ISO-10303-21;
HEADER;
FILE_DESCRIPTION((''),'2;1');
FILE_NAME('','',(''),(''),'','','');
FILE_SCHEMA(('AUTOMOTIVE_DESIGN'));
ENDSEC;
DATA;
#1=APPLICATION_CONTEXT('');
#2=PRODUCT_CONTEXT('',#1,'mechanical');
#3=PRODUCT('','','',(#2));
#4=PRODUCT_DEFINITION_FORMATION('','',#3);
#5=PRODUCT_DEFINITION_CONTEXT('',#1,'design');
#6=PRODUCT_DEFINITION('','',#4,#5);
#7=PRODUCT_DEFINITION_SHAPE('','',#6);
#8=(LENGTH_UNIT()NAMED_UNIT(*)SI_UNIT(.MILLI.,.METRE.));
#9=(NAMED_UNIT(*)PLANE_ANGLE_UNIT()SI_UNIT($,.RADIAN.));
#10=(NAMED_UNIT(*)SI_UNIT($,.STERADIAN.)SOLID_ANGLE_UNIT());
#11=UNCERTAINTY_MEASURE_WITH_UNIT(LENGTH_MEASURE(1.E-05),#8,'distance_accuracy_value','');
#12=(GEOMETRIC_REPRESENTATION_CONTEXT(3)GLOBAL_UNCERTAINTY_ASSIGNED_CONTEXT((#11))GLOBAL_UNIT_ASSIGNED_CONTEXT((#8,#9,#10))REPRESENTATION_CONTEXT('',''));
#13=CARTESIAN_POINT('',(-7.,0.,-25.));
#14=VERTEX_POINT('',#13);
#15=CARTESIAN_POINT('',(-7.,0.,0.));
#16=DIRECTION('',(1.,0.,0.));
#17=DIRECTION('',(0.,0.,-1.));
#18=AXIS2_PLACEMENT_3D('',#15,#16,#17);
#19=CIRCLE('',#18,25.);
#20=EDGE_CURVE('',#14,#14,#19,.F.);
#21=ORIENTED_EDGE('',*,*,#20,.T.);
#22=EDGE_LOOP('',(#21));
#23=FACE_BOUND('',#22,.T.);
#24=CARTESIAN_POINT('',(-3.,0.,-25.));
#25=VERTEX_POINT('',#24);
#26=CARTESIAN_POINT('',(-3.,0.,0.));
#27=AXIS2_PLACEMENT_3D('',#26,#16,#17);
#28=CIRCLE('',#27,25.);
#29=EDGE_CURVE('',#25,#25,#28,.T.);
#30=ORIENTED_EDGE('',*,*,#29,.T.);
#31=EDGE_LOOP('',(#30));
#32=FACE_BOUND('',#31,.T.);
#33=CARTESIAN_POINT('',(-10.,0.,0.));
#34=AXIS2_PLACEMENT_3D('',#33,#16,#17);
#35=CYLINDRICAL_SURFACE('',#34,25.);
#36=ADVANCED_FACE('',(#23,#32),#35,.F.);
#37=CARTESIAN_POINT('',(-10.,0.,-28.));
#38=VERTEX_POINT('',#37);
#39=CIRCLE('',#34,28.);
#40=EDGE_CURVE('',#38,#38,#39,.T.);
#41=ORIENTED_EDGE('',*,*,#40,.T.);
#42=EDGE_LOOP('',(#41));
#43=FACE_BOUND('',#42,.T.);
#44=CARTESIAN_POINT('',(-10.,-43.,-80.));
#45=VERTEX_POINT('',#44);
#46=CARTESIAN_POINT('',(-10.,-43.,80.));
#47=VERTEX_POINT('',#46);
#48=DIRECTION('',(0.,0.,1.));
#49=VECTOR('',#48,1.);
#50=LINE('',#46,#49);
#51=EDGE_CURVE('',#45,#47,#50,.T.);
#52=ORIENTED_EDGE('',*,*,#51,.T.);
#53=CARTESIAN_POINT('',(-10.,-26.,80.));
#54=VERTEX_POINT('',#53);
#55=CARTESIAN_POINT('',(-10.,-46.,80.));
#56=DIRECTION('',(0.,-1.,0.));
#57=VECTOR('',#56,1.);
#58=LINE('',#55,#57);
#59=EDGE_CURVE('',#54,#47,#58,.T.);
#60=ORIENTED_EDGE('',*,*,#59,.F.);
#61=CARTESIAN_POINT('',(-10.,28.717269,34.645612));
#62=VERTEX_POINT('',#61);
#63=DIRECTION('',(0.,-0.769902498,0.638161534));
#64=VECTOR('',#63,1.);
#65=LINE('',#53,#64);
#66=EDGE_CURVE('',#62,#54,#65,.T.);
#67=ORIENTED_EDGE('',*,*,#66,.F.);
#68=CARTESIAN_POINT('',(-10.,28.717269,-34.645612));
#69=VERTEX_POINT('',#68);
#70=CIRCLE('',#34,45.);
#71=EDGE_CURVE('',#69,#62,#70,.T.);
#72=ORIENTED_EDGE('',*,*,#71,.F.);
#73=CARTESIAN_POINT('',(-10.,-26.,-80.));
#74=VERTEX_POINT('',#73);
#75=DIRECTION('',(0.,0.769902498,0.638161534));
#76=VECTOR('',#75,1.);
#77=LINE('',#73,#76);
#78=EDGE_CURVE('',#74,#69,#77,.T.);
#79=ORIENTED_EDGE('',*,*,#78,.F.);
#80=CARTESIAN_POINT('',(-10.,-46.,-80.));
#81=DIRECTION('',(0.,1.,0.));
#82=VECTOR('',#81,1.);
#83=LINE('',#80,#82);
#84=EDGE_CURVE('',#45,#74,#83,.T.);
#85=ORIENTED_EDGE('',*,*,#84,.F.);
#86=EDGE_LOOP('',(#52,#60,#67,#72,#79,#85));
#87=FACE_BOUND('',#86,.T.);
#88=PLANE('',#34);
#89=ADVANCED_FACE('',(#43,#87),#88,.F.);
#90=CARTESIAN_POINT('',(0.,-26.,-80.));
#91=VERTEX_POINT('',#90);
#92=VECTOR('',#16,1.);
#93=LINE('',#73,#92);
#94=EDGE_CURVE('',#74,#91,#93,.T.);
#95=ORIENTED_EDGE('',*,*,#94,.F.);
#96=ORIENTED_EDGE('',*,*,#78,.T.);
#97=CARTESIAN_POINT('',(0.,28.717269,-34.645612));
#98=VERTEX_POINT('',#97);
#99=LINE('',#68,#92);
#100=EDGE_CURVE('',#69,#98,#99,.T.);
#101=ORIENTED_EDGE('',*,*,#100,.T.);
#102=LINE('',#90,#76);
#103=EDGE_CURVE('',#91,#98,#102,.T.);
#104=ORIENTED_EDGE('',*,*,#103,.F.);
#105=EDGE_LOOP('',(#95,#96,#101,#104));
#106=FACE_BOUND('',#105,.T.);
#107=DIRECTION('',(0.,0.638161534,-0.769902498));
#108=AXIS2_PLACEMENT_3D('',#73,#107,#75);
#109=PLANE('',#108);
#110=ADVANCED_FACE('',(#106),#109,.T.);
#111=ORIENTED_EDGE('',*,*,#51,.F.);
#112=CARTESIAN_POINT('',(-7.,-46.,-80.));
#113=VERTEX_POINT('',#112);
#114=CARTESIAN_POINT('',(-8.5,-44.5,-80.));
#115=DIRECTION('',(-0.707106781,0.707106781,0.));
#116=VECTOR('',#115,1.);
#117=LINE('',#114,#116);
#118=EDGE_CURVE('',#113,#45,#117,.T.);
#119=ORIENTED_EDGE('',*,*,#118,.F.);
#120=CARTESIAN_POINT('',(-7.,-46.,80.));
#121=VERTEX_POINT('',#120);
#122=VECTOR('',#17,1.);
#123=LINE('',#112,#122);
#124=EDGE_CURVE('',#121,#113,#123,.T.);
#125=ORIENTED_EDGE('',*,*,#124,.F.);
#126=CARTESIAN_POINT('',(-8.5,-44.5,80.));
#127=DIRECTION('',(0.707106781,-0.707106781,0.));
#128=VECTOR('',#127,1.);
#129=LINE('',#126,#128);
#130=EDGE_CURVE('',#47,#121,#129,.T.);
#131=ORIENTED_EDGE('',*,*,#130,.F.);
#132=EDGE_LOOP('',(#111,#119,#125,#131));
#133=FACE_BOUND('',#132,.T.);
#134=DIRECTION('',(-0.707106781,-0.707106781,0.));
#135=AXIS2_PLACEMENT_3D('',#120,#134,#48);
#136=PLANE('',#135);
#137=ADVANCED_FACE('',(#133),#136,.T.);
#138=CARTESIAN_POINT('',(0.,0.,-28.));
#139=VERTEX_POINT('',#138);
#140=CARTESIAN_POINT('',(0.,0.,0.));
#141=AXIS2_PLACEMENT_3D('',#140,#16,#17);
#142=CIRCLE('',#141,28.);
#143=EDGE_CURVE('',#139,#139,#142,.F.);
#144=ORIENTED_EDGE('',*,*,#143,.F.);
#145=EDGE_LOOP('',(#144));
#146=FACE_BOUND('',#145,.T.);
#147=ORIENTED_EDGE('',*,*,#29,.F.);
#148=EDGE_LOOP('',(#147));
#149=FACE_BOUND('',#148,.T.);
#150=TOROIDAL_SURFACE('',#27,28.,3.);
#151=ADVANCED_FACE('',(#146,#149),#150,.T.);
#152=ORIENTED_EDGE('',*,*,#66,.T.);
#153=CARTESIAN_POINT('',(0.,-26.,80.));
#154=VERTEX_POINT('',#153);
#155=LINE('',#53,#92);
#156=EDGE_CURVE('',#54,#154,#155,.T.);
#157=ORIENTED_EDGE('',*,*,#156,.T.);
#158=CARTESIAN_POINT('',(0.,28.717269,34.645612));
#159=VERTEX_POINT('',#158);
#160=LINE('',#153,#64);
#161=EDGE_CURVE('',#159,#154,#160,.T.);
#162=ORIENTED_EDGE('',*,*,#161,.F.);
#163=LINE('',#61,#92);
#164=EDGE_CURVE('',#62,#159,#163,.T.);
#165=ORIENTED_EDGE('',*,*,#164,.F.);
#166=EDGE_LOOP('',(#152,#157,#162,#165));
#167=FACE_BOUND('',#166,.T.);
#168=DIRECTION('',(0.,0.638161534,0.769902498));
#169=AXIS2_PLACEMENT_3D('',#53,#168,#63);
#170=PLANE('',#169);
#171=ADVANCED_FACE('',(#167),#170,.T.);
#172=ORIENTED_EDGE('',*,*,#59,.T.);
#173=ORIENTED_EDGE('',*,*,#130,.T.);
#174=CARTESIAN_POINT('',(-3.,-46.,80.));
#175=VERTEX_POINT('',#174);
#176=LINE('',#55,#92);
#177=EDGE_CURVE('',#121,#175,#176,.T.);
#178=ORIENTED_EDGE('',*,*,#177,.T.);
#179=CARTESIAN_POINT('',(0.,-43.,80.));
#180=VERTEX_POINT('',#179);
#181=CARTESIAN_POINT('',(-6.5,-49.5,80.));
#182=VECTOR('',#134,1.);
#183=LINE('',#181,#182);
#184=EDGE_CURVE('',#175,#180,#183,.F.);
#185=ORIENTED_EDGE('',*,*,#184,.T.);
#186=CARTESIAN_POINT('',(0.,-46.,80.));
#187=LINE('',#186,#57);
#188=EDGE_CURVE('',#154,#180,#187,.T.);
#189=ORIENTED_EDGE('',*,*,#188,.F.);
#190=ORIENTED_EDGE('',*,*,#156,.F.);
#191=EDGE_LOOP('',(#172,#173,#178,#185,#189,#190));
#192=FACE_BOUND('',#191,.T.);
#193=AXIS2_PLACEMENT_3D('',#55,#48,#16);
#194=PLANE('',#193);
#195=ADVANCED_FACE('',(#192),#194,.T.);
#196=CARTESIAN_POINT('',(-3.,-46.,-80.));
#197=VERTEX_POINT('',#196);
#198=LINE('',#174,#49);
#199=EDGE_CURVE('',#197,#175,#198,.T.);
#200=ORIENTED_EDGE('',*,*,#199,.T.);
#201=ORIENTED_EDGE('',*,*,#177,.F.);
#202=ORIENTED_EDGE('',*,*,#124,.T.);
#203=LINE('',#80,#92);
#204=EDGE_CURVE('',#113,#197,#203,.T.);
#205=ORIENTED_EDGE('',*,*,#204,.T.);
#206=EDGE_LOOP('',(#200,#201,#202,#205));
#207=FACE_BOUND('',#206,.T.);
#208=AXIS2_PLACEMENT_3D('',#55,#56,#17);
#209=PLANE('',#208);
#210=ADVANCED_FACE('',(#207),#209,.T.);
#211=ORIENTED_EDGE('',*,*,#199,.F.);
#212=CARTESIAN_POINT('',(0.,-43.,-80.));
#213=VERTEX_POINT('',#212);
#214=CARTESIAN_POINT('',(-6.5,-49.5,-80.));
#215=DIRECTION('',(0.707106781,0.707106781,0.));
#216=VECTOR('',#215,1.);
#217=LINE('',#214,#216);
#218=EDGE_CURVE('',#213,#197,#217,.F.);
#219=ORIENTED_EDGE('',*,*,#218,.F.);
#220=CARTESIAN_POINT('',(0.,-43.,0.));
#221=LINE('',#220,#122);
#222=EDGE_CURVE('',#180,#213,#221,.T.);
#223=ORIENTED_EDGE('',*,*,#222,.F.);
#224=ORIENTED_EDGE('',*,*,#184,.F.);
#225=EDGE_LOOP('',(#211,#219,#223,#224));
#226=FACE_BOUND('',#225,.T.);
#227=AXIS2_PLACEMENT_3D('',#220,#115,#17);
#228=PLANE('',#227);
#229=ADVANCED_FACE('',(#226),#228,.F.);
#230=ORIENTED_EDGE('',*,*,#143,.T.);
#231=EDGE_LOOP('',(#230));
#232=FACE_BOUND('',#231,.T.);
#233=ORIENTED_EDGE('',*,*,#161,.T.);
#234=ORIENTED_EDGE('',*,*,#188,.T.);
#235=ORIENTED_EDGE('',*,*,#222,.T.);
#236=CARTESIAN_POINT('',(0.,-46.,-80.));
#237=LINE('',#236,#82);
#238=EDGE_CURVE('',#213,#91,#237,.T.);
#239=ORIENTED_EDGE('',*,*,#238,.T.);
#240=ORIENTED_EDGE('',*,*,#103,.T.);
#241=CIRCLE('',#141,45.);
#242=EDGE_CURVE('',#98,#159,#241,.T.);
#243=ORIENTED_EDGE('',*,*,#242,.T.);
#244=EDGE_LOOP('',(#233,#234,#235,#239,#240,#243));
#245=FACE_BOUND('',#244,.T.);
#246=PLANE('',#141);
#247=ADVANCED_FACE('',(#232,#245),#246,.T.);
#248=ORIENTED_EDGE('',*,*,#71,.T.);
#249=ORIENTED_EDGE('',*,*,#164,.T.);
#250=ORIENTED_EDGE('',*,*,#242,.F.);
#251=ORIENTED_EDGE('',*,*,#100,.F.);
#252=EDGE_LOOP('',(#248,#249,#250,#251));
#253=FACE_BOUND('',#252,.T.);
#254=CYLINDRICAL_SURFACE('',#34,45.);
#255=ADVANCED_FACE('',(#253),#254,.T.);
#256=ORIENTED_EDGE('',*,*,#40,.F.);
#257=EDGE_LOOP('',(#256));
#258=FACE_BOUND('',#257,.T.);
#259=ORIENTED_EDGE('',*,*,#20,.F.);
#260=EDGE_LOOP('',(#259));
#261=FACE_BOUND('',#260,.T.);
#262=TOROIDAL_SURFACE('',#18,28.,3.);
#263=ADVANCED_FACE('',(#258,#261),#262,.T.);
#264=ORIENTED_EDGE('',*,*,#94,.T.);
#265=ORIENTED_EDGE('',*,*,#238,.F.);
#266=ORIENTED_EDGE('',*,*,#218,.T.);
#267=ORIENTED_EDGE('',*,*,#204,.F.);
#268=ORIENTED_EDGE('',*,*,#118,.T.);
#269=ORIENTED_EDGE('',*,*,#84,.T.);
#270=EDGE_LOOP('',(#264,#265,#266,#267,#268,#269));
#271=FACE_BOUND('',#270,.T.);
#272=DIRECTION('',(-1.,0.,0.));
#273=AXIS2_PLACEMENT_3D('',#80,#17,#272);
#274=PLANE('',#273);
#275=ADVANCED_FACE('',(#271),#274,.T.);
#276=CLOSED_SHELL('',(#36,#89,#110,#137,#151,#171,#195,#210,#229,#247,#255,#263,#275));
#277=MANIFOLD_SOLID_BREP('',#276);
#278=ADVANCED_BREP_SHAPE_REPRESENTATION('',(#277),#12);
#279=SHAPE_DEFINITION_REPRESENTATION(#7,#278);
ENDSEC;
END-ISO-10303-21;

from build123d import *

# Parameters (mm, degrees)
SKETCH1_R          = 25
BASE_FLANGE1_DEPTH = 10
FILLET1_R          = 3
CHAMFER1_SIZE      = 3


# Sheet-metal steps are written as plain solids
with BuildPart() as part:
    # Sketch1 → Base-Flange1 (new body)
    with BuildSketch(Plane(origin=(0, 0, 0), x_dir=(0, 0, -1), z_dir=(1, 0, 0))):
        with BuildLine():
            Line((-80, -46), (80, -46))
            Line((80, -46), (80, -26))
            Line((80, -26), (34.645612429, 28.717269011))
            ThreePointArc((34.645612429, 28.717269011), (0, 45), (-34.645612429, 28.717269011))
            Line((-34.645612429, 28.717269011), (-80, -26))
            Line((-80, -26), (-80, -46))
        make_face()
        Circle(SKETCH1_R, mode=Mode.SUBTRACT)
    extrude(amount=-BASE_FLANGE1_DEPTH)

    # Fillet1
    fillet1_edges = [part.edges().sort_by_distance(p)[0] for p in [
        (-10, 0, 25),
        (0, 0, 25),
    ]]
    fillet(fillet1_edges, radius=FILLET1_R)

    # Chamfer1
    chamfer1_edges = [part.edges().sort_by_distance(p)[0] for p in [
        (-10, -46, 0),
        (0, -46, 0),
    ]]
    chamfer(chamfer1_edges, length=CHAMFER1_SIZE)


solid = part.part
